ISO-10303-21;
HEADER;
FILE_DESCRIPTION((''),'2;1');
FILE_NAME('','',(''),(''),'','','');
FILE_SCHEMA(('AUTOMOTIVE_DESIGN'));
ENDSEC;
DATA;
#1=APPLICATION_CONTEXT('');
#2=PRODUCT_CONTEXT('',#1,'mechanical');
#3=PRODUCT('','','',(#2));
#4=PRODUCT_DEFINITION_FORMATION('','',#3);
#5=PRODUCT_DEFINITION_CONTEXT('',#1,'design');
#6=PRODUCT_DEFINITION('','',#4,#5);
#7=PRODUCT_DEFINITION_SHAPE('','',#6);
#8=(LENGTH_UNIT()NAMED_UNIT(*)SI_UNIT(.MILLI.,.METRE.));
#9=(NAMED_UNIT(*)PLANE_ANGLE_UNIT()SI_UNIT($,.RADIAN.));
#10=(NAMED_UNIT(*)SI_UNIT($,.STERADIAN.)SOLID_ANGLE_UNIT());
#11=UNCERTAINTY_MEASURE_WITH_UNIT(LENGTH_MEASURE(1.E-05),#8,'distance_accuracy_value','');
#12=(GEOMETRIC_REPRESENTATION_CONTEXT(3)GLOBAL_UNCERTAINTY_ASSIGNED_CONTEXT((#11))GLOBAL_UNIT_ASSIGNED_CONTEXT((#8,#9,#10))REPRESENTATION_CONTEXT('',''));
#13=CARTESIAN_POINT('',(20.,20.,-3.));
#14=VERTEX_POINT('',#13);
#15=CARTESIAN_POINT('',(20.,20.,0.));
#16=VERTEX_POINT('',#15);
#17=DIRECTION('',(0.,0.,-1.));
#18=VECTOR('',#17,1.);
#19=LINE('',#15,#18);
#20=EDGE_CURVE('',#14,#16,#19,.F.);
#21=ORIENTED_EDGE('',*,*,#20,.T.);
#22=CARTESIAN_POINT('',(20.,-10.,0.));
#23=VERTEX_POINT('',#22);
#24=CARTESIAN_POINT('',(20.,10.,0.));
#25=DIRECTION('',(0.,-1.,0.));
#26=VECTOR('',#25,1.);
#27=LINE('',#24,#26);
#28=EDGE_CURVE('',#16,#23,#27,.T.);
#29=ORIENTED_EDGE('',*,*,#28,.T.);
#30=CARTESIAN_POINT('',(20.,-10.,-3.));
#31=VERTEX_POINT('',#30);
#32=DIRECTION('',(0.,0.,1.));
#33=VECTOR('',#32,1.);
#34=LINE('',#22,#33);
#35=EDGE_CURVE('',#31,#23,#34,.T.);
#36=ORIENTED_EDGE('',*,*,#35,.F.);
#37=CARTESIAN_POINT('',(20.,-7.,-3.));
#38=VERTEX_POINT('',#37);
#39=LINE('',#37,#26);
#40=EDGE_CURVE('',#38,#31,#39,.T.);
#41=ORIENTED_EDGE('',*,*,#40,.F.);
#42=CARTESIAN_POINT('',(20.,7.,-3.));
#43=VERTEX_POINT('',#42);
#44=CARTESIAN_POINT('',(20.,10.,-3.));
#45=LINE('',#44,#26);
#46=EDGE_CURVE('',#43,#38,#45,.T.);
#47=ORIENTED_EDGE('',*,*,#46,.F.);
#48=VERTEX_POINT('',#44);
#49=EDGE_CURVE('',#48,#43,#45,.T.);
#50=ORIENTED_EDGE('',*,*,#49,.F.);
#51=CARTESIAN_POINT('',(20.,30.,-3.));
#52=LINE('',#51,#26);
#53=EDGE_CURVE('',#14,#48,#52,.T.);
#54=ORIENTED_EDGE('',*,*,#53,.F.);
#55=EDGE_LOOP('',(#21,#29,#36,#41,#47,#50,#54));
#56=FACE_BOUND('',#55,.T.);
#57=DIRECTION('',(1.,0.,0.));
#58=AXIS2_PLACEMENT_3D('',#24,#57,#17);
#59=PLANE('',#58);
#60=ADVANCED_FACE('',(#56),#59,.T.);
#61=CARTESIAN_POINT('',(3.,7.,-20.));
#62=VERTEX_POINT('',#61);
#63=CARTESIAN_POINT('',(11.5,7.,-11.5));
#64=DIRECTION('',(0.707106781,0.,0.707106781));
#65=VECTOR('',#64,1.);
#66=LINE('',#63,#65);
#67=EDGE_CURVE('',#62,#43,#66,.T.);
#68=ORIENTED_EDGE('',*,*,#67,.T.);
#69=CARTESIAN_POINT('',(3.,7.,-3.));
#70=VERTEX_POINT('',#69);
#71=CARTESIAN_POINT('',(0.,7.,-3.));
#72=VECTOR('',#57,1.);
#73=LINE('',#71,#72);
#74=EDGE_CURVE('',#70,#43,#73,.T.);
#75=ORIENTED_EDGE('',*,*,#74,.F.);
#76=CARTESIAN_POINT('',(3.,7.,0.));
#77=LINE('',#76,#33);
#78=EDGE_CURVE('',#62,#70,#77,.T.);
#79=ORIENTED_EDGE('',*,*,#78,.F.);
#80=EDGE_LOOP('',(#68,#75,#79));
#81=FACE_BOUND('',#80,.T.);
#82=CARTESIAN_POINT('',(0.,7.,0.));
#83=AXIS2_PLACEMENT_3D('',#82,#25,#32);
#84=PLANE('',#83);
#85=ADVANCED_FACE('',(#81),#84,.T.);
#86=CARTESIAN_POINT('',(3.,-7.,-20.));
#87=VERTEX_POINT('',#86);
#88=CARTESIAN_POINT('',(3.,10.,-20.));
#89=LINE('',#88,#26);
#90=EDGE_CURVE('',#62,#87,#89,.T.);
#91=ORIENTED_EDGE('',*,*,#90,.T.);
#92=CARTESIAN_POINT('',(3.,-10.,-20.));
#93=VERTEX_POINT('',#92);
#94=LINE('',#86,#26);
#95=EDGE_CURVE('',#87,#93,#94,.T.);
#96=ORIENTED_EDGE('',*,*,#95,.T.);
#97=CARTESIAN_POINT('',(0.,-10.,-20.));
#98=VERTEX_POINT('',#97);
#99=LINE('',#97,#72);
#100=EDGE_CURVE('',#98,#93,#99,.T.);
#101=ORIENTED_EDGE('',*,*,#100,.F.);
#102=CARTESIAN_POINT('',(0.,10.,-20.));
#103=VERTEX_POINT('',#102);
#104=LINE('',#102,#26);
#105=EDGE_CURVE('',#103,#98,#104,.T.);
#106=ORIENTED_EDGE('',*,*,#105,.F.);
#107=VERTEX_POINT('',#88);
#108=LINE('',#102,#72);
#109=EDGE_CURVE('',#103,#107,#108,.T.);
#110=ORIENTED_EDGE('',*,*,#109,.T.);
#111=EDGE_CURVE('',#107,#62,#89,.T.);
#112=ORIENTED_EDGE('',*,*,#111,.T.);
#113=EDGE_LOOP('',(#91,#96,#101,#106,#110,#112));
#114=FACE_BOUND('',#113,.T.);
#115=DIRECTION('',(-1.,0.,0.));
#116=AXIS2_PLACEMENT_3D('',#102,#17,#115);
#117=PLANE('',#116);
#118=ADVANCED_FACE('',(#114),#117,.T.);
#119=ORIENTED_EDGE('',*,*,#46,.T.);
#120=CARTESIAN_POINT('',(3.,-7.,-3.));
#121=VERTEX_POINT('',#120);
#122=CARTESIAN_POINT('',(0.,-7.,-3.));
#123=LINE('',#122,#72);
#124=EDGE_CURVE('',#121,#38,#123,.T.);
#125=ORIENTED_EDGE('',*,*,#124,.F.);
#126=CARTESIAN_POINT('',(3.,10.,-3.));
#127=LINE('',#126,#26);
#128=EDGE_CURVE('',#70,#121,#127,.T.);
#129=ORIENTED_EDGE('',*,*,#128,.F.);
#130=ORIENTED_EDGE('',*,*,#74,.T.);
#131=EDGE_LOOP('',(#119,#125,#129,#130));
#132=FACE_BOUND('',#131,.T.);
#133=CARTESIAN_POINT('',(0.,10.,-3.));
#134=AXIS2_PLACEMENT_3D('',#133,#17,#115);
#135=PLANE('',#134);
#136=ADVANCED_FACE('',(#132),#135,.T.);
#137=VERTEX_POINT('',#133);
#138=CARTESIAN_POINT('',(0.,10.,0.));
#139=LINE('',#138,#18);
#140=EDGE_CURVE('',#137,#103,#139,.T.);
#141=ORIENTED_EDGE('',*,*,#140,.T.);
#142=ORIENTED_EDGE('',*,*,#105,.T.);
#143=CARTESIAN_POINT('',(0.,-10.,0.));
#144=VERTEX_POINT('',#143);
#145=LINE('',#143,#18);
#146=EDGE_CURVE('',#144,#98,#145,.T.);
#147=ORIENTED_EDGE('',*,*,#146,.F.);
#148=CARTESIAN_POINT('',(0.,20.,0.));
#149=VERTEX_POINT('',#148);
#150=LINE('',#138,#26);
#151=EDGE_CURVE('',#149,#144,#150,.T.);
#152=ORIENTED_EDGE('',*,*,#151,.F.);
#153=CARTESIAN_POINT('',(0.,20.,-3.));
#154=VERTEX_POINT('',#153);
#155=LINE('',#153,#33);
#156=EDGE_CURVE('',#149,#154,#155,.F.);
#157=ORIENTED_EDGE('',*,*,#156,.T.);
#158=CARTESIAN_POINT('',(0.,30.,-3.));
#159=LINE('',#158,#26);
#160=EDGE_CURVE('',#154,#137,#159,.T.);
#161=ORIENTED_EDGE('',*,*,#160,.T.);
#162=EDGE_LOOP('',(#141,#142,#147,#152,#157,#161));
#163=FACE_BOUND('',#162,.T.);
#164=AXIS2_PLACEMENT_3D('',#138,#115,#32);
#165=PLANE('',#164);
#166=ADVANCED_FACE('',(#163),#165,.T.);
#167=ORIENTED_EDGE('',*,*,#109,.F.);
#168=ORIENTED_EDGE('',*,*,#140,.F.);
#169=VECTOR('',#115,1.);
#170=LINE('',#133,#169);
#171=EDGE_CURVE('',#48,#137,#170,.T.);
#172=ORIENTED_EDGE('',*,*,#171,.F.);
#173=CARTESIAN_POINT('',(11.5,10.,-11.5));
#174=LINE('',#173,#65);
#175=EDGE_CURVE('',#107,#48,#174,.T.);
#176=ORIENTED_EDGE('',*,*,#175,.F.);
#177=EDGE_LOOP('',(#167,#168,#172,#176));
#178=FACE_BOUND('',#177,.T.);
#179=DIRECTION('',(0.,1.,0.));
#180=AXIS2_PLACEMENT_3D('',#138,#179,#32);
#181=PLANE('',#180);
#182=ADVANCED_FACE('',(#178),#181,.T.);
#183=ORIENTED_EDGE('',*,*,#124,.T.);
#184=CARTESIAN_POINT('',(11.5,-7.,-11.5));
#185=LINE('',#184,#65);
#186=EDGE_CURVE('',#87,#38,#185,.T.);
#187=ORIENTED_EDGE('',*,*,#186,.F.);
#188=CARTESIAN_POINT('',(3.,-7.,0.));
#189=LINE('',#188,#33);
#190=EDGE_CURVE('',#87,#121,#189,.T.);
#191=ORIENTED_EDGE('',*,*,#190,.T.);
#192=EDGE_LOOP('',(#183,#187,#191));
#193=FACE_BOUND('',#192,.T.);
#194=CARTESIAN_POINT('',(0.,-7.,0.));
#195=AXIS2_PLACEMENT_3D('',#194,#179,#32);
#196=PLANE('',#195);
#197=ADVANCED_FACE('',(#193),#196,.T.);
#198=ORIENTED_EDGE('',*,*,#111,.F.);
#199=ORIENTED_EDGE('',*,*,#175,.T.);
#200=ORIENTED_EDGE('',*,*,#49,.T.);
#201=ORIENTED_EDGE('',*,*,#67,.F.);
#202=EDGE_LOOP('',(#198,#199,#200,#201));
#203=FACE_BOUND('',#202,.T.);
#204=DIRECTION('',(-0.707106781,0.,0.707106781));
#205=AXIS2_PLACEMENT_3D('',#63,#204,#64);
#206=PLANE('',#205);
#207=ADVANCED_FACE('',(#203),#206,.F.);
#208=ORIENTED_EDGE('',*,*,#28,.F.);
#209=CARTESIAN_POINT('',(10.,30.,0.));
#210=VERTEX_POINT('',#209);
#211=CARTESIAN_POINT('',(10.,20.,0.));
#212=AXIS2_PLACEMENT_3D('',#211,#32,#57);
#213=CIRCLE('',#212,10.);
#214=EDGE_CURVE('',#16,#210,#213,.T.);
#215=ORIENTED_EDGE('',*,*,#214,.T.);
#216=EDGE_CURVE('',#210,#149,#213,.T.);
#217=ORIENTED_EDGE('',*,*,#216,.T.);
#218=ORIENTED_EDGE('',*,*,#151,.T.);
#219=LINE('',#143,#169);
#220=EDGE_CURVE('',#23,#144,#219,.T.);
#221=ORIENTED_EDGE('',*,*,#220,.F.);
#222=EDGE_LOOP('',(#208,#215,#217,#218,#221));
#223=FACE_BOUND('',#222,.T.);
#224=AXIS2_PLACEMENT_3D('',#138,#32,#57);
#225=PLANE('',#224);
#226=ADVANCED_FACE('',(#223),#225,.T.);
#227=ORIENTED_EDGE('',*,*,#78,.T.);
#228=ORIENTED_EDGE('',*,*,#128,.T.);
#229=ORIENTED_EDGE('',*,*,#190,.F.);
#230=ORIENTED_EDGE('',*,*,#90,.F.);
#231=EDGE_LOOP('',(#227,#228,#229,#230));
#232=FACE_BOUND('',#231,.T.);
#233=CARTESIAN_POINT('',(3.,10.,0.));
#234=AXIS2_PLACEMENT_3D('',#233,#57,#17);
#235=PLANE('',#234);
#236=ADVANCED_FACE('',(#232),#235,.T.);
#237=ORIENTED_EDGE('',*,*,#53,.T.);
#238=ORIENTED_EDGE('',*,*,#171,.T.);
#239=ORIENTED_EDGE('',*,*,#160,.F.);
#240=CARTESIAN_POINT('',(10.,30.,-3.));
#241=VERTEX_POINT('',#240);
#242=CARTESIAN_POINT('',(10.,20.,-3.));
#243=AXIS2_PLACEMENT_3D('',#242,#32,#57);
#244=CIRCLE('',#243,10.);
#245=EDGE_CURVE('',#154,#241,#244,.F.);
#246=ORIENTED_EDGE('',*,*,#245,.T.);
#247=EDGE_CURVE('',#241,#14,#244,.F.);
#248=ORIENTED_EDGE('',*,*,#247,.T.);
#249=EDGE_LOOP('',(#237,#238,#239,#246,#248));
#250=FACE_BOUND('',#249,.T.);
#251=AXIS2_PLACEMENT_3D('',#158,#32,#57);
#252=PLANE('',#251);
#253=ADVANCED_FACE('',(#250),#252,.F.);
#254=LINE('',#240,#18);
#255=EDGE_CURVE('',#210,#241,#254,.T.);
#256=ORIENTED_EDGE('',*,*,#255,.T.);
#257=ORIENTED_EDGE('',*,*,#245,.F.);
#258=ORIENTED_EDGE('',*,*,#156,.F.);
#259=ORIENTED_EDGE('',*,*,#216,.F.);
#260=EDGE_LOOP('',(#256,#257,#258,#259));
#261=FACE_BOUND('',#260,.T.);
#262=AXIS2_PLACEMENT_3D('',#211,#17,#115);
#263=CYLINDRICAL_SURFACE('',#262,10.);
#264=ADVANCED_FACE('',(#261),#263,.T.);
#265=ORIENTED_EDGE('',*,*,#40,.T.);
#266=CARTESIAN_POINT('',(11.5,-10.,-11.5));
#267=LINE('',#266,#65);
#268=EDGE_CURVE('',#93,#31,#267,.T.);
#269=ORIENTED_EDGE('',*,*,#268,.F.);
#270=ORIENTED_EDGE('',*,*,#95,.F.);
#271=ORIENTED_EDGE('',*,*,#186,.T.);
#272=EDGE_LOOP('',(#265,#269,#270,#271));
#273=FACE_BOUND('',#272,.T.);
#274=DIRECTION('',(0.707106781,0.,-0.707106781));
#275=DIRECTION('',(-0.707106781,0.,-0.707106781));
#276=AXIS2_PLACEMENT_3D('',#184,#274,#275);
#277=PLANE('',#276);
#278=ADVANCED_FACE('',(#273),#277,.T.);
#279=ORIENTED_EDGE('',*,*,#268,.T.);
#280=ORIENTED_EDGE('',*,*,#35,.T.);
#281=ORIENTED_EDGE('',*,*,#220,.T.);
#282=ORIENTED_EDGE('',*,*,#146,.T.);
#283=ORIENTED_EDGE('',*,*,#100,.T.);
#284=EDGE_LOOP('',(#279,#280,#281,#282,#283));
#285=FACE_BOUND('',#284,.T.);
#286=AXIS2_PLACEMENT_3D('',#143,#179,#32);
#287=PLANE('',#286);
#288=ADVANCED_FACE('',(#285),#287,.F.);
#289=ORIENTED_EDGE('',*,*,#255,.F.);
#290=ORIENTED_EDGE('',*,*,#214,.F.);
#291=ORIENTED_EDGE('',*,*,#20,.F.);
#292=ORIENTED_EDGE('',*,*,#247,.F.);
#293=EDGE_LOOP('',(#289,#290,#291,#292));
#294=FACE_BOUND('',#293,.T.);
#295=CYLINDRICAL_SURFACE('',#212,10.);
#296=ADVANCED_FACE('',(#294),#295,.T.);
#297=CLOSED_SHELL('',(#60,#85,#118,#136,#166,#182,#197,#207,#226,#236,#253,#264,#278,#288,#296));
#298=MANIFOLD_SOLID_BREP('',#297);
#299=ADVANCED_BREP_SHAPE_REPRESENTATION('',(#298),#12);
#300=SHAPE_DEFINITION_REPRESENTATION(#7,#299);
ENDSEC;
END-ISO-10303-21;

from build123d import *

# Parameters (mm, degrees)
EXTRUDE_1_DEPTH = 10
EXTRUDE_START   = -10
EXTRUDE_2_DEPTH = 3
SKETCH_2_W      = 20
SKETCH_2_H      = 3
EXTRUDE_3_DEPTH = 20
FILLET_1_R      = 10


with BuildPart() as part:
    # Эскиз1 → Бобышка-Вытянуть1 (new, symmetric)
    with BuildSketch(Plane(origin=(0, 0, 0), x_dir=(1, 0, 0), z_dir=(0, 1, 0))):
        Polygon((20, 0), (0, 0), (0, 20), (3, 20), (3, 3), (20, 3), align=None)
    extrude(amount=EXTRUDE_1_DEPTH, both=True)

    # Эскиз1<3> → Бобышка-Вытянуть2 (add)
    with BuildSketch(Plane(origin=(0, 0, 0), x_dir=(1, 0, 0), z_dir=(0, 1, 0)).offset(EXTRUDE_START)):
        Polygon((3, 20), (20, 3), (3, 3), align=None)
    extrude_2 = extrude(amount=EXTRUDE_2_DEPTH)

    # Зеркальное отражение2: Бобышка-Вытянуть2 across plane
    add(extrude_2.mirror(Plane.ZX))

    # Эскиз2 → Бобышка-Вытянуть3 (add)
    with BuildSketch(Plane(origin=(0, 10, 0), x_dir=(1, 0, 0), z_dir=(0, 1, 0))):
        with Locations((10, 1.5)):
            Rectangle(SKETCH_2_W, SKETCH_2_H)
    extrude(amount=EXTRUDE_3_DEPTH)

    # Скругление1
    fillet_1_edges = [part.edges().sort_by_distance(p)[0] for p in [
        (0, 30, -1.5),
        (20, 30, -1.5),
    ]]
    fillet(fillet_1_edges, radius=FILLET_1_R - 0.0001)  # a hair under: the kernel refuses the full size


solid = part.part
